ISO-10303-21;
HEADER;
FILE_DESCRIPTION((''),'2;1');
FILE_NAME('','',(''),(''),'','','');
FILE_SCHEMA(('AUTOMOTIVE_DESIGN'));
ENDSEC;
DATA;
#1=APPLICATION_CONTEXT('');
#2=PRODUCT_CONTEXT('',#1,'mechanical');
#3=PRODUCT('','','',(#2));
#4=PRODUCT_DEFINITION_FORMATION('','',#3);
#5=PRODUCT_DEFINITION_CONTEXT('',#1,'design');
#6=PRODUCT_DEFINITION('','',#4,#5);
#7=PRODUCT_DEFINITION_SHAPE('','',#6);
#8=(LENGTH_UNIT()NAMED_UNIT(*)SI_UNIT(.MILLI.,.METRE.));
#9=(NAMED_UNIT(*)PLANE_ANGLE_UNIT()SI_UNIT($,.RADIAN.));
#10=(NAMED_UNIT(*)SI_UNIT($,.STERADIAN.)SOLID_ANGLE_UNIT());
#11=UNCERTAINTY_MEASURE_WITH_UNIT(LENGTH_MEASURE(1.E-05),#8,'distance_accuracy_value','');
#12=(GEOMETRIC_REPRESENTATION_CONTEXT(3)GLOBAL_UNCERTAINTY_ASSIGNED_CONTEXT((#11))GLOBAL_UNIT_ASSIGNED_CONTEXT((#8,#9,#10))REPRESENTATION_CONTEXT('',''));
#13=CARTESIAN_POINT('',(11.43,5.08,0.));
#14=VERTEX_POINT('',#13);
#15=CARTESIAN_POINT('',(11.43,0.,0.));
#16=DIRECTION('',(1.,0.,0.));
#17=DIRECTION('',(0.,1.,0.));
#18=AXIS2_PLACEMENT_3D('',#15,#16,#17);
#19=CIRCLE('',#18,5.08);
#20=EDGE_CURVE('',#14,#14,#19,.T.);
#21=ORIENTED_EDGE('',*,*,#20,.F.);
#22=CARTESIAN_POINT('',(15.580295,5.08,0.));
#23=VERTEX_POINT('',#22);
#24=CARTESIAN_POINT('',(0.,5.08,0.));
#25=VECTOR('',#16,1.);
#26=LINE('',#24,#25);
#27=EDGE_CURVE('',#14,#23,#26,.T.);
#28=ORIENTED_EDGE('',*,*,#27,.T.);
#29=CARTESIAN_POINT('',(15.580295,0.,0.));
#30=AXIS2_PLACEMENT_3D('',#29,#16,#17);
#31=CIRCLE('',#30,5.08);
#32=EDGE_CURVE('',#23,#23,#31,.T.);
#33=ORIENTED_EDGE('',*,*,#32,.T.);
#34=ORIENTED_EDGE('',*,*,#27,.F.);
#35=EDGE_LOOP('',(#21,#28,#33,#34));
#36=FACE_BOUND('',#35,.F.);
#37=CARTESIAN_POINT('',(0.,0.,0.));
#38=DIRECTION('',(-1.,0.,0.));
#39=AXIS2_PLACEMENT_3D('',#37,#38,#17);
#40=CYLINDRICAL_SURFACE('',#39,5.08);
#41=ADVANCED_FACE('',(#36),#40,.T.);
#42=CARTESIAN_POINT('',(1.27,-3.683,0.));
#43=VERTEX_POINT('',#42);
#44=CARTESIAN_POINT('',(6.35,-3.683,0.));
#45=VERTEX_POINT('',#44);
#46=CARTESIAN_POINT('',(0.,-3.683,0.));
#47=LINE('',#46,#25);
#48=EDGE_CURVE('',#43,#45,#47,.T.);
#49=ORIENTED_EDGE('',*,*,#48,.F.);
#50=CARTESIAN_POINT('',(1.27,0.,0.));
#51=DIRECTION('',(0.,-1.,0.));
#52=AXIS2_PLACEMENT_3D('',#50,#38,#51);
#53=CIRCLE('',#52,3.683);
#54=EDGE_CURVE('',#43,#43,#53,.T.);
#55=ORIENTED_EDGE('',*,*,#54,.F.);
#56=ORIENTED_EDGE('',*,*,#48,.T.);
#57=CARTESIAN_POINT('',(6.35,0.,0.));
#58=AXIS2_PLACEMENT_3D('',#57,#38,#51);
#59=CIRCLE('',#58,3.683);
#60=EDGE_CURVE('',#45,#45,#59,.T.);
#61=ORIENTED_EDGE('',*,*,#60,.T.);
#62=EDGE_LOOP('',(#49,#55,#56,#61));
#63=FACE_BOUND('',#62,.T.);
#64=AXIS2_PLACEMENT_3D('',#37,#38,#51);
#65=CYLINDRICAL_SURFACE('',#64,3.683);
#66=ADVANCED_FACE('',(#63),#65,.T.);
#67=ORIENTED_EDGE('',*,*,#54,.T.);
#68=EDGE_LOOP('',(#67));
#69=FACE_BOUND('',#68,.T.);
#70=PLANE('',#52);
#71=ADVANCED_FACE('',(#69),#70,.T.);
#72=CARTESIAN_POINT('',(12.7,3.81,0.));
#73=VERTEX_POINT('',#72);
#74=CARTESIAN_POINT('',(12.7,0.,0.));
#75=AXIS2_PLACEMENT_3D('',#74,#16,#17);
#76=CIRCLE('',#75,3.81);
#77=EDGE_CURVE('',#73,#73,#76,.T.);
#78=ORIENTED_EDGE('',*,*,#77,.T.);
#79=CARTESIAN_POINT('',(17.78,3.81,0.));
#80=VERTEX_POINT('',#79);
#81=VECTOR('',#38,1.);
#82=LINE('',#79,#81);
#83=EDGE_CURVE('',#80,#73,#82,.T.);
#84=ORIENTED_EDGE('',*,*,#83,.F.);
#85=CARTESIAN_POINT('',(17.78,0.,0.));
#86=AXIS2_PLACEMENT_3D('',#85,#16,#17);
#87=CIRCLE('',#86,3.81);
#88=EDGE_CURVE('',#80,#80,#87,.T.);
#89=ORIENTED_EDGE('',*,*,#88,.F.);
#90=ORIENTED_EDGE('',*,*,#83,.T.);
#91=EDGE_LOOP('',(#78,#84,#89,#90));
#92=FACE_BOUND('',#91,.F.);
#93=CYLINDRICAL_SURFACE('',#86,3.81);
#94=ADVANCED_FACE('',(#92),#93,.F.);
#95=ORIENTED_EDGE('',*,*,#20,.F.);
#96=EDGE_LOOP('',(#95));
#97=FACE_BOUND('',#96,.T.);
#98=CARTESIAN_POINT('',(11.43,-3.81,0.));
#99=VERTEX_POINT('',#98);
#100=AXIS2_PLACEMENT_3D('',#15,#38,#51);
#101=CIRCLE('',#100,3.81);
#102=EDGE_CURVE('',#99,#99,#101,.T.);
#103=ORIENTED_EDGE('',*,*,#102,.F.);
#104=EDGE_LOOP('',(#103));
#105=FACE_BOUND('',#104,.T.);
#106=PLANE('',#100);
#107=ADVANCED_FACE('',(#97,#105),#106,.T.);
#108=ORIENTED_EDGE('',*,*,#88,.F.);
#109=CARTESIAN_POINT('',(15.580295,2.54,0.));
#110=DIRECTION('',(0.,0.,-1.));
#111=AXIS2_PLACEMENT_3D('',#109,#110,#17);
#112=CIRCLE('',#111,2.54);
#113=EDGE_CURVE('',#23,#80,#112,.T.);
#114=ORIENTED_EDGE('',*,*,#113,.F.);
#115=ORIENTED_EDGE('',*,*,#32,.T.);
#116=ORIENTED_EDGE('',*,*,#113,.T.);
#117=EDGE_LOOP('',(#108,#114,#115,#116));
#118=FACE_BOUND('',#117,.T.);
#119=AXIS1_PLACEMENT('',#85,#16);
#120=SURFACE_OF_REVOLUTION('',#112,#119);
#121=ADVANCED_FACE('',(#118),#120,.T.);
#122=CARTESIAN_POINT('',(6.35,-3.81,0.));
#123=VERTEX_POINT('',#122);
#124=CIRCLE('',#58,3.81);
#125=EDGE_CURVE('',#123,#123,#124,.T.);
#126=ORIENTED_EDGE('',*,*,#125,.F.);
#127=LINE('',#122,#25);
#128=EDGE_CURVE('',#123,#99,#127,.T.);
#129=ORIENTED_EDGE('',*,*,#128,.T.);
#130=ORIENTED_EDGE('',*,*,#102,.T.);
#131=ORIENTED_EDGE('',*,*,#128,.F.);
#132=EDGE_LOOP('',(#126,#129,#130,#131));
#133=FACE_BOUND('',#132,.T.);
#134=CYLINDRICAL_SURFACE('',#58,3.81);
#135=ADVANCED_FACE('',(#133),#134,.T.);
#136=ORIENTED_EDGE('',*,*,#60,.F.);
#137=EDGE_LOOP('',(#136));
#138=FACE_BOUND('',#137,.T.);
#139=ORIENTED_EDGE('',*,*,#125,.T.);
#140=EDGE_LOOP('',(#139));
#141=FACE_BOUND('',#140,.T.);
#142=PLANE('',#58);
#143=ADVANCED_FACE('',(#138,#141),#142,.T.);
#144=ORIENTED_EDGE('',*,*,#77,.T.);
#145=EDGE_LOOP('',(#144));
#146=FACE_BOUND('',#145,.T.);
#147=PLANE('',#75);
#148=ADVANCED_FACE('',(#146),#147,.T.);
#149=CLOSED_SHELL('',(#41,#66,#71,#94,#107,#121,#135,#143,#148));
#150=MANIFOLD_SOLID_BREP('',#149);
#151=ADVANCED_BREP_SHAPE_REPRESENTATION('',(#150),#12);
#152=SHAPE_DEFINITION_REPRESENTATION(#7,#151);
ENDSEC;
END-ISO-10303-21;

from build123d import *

# Parameters (mm, degrees)
F0_R     = 5.08
F1_DEPTH = 17.78
F2_R     = 5.08
F2_R_2   = 3.683
F3_DEPTH = 6.35
F4_R     = 5.08
F4_R_2   = 3.81
F5_DEPTH = 5.08
F6_R     = 3.81
F7_DEPTH = 5.08
F8_R     = 3.683
F9_DEPTH = 1.27


# Not quite as in the source:
# - a fillet or chamfer that OpenCascade refuses, or shapes differently, is made with other operations: its cross-section is extruded or revolved along the edge and cut away or added


with BuildPart() as f1:
    # F0 (on Right) → F1 (new body)
    with BuildSketch(Plane.YZ):
        Circle(F0_R)
    extrude(amount=F1_DEPTH)

    # F2 (on face) → F3 (cut)
    with BuildSketch(Plane(origin=(0, 0, 0), x_dir=(0, -1, 0), z_dir=(-1, 0, 0))):
        Circle(F2_R)
        Circle(F2_R_2, mode=Mode.SUBTRACT)
    extrude(amount=-F3_DEPTH, mode=Mode.SUBTRACT)

    # F4 (on face) → F5 (cut)
    with BuildSketch(Plane(origin=(6.35, 0, 0), x_dir=(0, -1, 0), z_dir=(-1, 0, 0))):
        Circle(F4_R)
        Circle(F4_R_2, mode=Mode.SUBTRACT)
    extrude(amount=-F5_DEPTH, mode=Mode.SUBTRACT)

    # F6 (on face) → F7 (cut)
    with BuildSketch(Plane.YZ.offset(17.78)):
        Circle(F6_R)
    extrude(amount=-F7_DEPTH, mode=Mode.SUBTRACT)

    # F8 (on face) → F9 (cut)
    with BuildSketch(Plane(origin=(0, 0, 0), x_dir=(0, -1, 0), z_dir=(-1, 0, 0))):
        Circle(F8_R)
    extrude(amount=-F9_DEPTH, mode=Mode.SUBTRACT)

    # F10: fillet of radius 2.54 on 1 edges, made by hand

    # F10_s1 → F10_t2 (revolve, cut)
    with BuildSketch(Plane.XY):
        with BuildLine():
            ThreePointArc((15.5802954744, 5.08), (16.8502954744, 4.7397045256), (17.78, 3.81))
            Line((17.78, 3.81), (17.78, 5.08))
            Line((17.78, 5.08), (15.5802954744, 5.08))
        make_face()
    revolve(axis=Axis((17.78, 0, 0), (1, 0, 0)), mode=Mode.SUBTRACT)


solid = f1.part
